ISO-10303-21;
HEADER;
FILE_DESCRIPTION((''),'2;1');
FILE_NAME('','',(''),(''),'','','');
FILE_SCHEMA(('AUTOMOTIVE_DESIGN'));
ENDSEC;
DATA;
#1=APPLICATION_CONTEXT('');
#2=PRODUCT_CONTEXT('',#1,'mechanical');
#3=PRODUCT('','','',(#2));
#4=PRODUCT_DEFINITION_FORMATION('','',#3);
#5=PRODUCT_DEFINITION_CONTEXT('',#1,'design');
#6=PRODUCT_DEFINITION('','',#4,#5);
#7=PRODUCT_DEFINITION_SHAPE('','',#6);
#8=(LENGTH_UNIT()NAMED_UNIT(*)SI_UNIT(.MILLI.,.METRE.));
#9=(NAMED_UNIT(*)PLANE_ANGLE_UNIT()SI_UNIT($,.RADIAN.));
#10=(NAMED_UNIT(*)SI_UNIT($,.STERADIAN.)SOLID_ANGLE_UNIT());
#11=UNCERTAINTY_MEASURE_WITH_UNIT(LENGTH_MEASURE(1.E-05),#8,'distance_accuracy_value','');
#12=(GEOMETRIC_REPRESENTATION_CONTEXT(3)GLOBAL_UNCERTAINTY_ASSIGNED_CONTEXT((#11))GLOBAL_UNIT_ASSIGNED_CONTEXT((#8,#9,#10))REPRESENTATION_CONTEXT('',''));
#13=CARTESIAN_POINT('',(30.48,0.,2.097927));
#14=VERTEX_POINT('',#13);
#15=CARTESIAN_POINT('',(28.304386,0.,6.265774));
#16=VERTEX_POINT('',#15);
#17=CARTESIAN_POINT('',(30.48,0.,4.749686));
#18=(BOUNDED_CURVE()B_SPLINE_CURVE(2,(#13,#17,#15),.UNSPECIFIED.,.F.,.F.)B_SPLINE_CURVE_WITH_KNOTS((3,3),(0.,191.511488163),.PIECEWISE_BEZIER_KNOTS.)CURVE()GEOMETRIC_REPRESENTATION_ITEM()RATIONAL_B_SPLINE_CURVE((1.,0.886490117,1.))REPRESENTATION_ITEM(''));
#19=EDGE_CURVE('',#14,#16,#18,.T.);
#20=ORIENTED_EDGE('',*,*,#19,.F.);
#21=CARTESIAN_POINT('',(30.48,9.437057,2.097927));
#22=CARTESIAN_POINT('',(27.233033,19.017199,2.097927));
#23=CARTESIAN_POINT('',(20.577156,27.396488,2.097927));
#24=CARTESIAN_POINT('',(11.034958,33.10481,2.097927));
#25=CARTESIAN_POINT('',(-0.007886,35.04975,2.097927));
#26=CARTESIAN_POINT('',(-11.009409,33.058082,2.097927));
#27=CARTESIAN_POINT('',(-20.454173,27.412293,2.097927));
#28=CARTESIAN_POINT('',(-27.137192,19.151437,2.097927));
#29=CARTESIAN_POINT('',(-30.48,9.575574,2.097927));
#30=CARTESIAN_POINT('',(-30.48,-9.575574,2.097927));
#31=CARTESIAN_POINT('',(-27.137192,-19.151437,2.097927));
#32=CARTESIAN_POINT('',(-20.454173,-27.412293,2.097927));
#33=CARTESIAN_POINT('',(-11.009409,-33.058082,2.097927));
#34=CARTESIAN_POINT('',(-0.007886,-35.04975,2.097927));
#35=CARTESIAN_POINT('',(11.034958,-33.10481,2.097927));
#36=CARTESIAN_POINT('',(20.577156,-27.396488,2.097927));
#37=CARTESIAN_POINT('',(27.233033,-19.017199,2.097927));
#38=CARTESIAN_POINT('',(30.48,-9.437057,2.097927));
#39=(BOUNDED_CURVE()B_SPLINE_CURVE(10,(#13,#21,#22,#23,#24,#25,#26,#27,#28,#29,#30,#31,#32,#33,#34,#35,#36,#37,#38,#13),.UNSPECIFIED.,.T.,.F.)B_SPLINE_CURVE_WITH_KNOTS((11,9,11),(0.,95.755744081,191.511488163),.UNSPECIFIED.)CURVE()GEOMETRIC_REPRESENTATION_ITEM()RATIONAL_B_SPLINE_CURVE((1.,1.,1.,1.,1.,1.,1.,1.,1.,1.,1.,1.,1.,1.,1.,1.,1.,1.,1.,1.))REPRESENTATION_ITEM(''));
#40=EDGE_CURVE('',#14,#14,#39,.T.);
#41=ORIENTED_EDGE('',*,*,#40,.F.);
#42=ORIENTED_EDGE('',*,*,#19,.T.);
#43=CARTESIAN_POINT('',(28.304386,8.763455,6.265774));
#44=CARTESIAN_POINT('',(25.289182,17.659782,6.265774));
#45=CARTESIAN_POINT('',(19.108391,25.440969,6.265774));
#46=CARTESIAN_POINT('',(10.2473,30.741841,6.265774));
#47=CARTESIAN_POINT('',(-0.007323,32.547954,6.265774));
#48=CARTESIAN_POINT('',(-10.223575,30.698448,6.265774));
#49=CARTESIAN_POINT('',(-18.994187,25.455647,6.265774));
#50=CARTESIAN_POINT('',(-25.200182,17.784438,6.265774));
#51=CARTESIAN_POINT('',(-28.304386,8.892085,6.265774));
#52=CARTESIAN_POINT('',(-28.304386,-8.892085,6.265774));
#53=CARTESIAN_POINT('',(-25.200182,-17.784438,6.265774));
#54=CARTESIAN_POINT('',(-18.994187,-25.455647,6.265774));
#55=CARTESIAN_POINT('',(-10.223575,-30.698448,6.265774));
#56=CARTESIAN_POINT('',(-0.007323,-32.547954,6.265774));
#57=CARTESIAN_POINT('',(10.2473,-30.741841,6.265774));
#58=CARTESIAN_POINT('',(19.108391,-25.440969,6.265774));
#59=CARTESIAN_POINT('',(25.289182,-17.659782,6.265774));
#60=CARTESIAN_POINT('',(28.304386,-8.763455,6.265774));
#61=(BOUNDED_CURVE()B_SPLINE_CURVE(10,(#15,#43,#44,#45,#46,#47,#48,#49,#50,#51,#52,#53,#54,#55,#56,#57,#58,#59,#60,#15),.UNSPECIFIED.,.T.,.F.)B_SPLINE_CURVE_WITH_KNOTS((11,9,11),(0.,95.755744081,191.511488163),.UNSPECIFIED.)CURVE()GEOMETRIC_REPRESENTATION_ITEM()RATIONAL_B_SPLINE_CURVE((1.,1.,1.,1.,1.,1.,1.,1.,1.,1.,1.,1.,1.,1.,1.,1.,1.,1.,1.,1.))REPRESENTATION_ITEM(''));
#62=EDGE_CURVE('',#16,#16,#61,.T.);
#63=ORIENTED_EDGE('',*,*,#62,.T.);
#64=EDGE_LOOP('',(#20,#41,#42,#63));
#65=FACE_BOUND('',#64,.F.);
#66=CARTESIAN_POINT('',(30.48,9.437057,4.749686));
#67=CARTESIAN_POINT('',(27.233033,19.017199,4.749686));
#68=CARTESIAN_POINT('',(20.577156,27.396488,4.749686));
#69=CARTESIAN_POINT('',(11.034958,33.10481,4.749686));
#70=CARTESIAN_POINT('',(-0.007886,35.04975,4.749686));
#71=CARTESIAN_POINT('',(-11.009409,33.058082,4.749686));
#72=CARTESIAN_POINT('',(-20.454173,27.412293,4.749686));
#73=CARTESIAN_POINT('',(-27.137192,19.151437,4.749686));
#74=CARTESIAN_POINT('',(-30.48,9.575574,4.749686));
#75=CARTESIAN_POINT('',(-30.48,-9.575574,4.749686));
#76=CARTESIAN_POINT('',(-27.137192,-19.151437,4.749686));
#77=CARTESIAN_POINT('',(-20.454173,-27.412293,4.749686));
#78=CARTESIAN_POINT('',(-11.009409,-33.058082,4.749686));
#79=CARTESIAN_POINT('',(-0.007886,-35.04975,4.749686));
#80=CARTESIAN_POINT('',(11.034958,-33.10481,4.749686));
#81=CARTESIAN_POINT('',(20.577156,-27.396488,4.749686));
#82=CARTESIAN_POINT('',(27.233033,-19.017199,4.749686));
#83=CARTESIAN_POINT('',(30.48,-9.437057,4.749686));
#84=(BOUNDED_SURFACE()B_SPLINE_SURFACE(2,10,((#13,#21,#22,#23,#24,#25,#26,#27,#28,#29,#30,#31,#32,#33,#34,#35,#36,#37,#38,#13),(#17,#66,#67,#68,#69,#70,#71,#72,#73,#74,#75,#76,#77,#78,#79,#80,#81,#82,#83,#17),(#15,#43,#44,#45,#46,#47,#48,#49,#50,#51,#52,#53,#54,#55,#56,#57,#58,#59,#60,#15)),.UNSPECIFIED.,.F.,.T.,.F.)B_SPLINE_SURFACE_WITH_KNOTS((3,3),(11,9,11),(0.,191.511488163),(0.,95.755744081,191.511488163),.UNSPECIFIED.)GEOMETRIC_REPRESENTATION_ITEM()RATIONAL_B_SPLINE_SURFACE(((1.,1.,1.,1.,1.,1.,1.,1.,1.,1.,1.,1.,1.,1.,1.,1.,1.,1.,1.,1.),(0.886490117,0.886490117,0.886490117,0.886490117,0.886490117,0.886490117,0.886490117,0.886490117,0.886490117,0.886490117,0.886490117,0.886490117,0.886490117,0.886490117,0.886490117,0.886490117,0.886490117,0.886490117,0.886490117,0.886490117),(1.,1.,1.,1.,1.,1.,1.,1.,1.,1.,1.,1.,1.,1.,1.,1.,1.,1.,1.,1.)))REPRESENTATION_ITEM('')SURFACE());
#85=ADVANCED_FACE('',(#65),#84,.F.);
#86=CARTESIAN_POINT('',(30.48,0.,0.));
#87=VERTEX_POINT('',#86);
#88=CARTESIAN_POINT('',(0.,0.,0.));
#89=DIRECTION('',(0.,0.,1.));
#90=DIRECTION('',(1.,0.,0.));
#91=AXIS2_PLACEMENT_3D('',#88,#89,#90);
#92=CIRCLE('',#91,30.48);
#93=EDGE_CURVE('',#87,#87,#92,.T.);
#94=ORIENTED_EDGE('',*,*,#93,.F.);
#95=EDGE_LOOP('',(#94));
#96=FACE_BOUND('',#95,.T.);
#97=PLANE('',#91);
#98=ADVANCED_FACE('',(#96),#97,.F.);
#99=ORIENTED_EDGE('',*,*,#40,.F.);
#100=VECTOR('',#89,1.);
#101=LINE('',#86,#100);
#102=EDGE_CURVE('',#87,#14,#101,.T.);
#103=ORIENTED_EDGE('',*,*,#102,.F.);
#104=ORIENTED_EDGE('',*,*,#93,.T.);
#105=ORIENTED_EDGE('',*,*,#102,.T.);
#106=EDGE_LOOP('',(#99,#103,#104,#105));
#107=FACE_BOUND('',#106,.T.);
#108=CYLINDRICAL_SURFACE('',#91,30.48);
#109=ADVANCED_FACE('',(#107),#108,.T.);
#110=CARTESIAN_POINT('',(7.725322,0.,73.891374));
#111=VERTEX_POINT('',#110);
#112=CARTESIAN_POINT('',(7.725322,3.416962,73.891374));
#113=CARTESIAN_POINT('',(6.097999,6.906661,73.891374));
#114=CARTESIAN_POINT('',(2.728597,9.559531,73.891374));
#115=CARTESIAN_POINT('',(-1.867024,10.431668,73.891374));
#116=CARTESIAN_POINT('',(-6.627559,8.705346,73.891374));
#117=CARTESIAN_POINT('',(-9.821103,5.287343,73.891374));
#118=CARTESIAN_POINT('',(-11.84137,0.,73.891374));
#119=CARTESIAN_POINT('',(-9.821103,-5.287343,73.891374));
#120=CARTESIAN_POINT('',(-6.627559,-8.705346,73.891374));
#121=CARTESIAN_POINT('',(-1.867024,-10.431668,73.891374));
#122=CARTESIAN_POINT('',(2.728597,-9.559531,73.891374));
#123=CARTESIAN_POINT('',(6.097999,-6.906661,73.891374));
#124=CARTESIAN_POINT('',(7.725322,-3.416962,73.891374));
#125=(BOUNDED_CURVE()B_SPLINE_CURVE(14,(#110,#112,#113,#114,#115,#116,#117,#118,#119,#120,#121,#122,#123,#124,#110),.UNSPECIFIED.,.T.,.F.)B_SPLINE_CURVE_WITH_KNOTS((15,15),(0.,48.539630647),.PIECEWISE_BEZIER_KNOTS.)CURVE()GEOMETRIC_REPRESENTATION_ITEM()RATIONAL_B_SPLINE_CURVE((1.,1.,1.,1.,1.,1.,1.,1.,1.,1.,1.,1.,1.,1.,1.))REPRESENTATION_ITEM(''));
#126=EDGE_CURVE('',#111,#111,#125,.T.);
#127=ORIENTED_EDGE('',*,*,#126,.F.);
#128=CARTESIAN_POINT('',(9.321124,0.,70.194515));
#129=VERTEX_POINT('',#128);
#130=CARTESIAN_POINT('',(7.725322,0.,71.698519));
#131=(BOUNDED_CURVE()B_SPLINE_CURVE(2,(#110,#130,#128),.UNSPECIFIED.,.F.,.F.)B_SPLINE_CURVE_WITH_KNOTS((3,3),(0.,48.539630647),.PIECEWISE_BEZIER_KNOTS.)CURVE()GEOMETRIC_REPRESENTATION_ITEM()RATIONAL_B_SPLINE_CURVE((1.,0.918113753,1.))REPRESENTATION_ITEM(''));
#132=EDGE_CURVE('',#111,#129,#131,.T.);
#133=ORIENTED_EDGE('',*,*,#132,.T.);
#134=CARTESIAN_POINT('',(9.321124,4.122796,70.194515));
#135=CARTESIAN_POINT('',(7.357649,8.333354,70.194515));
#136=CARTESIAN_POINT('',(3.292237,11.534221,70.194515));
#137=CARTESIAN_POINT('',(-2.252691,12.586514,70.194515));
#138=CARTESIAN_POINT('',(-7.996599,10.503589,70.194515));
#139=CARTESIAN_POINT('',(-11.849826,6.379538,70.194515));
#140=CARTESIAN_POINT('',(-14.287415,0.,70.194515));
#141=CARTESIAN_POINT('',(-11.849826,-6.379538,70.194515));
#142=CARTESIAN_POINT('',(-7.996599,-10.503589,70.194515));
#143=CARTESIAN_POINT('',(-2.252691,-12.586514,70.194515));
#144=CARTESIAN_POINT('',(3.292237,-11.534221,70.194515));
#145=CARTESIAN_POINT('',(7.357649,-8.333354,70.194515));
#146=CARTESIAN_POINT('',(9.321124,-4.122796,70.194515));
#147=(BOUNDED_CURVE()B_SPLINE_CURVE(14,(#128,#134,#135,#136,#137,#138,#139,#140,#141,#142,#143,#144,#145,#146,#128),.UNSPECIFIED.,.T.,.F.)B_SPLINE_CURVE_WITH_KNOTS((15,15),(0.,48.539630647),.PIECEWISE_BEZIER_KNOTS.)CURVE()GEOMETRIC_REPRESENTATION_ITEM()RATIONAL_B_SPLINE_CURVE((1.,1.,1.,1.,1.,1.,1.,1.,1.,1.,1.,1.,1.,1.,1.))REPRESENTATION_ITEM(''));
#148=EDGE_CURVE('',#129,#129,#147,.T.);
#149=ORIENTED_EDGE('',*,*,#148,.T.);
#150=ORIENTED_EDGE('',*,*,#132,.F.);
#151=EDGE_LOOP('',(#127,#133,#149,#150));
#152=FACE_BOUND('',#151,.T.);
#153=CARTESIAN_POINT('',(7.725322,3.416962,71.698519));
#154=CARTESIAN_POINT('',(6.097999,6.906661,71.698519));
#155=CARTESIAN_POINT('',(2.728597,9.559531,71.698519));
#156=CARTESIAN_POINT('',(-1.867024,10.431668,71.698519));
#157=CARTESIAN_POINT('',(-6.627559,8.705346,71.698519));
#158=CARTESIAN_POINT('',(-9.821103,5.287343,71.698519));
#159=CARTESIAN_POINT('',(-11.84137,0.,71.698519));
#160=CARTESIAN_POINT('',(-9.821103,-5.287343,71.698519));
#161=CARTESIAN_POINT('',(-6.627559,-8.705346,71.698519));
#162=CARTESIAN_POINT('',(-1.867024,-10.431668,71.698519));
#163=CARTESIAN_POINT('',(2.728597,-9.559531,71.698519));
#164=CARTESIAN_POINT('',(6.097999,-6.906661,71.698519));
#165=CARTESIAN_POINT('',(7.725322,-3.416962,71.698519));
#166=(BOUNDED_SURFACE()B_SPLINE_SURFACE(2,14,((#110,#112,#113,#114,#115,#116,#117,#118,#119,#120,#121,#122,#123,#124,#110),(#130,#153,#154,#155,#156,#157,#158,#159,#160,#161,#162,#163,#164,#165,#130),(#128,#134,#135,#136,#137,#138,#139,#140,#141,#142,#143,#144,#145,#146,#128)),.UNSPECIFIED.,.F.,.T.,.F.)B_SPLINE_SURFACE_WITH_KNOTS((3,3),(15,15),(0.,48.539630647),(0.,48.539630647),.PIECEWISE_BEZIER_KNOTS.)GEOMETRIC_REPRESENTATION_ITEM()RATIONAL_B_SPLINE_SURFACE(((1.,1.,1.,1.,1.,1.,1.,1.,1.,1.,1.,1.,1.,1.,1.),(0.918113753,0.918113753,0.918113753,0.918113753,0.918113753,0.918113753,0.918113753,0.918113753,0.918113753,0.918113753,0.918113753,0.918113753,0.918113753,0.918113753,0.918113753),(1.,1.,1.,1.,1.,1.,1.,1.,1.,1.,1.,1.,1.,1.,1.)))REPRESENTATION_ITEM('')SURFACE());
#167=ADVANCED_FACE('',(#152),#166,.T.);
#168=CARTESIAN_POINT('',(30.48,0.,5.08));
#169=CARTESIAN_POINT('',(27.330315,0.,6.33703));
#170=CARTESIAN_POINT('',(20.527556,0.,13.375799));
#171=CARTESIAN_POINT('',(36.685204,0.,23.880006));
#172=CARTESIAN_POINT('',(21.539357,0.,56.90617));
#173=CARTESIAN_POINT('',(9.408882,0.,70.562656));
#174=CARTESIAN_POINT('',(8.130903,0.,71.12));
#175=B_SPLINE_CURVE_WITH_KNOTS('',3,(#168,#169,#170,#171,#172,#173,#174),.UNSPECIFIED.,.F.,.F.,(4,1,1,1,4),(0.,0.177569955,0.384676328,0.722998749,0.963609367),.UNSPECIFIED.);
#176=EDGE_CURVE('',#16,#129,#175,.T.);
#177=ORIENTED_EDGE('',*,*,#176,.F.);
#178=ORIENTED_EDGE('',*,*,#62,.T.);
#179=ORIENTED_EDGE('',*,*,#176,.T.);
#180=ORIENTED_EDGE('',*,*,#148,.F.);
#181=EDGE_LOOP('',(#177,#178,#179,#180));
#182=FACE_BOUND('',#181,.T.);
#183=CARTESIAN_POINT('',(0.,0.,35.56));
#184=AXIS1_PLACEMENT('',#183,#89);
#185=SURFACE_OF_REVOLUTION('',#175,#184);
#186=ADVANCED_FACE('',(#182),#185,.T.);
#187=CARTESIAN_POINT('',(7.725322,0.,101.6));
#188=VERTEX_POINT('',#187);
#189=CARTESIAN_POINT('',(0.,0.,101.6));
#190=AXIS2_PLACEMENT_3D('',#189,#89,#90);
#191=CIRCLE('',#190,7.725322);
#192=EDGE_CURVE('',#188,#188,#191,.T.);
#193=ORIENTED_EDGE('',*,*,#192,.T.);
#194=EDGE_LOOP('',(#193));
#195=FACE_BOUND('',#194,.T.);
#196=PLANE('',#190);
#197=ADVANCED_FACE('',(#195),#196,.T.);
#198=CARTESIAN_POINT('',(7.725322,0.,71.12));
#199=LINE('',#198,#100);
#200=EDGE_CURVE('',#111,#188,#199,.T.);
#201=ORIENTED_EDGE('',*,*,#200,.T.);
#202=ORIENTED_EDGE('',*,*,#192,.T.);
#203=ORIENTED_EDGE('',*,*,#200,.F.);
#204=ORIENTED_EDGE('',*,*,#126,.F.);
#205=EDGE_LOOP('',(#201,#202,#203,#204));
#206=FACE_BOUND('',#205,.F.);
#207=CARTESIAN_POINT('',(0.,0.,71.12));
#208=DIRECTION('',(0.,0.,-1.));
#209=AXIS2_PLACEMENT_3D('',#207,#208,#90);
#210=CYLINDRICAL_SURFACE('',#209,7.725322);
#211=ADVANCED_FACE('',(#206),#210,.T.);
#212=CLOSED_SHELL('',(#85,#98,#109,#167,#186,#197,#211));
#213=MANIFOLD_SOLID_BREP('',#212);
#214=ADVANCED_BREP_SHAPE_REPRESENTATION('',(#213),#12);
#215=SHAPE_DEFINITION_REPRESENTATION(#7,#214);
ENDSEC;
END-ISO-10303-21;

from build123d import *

# Parameters (mm, degrees)
F2_R     = 5.08
F3_DEPTH = 30.48
F4_R     = 5.08


with BuildPart() as f1:
    # F0 (on Front) → F1 (revolve)
    with BuildSketch(Plane.XZ):
        with BuildLine():
            add(Edge.make_bspline(
                [(8.1309033558, 71.12), (7.9376181833, 71.2042943301), (7.8304224666, 71.1715075808), (7.7253221534, 71.12)],
                knots=[0.9636093673, 0.9636093673, 0.9636093673, 0.9636093673, 1, 1, 1, 1], degree=3))
            Line((7.7253221534, 71.12), (8.1309033558, 71.12))
        make_face()
        with BuildLine():
            Line((0, 71.12), (0, 0))
            Line((0, 0), (30.48, 0))
            Line((30.48, 0), (30.48, 5.08))
            add(Edge.make_bspline(
                [(30.48, 5.08), (27.3303148752, 6.3370296731), (20.5275560182, 13.3757986931), (36.6852035847, 23.8800059507), (21.5393568197, 56.9061702589), (9.4088823722, 70.5626557213), (8.1309033558, 71.12)],
                knots=[0, 0, 0, 0, 0.1775699554, 0.3846763281, 0.7229987487, 0.9636093673, 0.9636093673, 0.9636093673, 0.9636093673], degree=3))
            Line((8.1309033558, 71.12), (7.7253221534, 71.12))
            Line((7.7253221534, 71.12), (0, 71.12))
        make_face()
    revolve(axis=Axis((0, 0, 35.56), (0, 0, 1)))

    # F2
    f2_edges = [f1.edges().sort_by_distance(p)[0] for p in [
        (-30.48, 0, 5.08),
    ]]
    fillet(f2_edges, radius=F2_R)

    # F3 (add): a face of the model
    f3_faces = [f1.faces().sort_by_distance(p)[0] for p in [
        (0, 0, 71.12),
    ]]
    extrude(f3_faces, amount=F3_DEPTH)

    # F4
    f4_edges = [f1.edges().sort_by_distance(p)[0] for p in [
        (-7.725322, 0, 71.12),
    ]]
    fillet(f4_edges, radius=F4_R)


solid = f1.part
